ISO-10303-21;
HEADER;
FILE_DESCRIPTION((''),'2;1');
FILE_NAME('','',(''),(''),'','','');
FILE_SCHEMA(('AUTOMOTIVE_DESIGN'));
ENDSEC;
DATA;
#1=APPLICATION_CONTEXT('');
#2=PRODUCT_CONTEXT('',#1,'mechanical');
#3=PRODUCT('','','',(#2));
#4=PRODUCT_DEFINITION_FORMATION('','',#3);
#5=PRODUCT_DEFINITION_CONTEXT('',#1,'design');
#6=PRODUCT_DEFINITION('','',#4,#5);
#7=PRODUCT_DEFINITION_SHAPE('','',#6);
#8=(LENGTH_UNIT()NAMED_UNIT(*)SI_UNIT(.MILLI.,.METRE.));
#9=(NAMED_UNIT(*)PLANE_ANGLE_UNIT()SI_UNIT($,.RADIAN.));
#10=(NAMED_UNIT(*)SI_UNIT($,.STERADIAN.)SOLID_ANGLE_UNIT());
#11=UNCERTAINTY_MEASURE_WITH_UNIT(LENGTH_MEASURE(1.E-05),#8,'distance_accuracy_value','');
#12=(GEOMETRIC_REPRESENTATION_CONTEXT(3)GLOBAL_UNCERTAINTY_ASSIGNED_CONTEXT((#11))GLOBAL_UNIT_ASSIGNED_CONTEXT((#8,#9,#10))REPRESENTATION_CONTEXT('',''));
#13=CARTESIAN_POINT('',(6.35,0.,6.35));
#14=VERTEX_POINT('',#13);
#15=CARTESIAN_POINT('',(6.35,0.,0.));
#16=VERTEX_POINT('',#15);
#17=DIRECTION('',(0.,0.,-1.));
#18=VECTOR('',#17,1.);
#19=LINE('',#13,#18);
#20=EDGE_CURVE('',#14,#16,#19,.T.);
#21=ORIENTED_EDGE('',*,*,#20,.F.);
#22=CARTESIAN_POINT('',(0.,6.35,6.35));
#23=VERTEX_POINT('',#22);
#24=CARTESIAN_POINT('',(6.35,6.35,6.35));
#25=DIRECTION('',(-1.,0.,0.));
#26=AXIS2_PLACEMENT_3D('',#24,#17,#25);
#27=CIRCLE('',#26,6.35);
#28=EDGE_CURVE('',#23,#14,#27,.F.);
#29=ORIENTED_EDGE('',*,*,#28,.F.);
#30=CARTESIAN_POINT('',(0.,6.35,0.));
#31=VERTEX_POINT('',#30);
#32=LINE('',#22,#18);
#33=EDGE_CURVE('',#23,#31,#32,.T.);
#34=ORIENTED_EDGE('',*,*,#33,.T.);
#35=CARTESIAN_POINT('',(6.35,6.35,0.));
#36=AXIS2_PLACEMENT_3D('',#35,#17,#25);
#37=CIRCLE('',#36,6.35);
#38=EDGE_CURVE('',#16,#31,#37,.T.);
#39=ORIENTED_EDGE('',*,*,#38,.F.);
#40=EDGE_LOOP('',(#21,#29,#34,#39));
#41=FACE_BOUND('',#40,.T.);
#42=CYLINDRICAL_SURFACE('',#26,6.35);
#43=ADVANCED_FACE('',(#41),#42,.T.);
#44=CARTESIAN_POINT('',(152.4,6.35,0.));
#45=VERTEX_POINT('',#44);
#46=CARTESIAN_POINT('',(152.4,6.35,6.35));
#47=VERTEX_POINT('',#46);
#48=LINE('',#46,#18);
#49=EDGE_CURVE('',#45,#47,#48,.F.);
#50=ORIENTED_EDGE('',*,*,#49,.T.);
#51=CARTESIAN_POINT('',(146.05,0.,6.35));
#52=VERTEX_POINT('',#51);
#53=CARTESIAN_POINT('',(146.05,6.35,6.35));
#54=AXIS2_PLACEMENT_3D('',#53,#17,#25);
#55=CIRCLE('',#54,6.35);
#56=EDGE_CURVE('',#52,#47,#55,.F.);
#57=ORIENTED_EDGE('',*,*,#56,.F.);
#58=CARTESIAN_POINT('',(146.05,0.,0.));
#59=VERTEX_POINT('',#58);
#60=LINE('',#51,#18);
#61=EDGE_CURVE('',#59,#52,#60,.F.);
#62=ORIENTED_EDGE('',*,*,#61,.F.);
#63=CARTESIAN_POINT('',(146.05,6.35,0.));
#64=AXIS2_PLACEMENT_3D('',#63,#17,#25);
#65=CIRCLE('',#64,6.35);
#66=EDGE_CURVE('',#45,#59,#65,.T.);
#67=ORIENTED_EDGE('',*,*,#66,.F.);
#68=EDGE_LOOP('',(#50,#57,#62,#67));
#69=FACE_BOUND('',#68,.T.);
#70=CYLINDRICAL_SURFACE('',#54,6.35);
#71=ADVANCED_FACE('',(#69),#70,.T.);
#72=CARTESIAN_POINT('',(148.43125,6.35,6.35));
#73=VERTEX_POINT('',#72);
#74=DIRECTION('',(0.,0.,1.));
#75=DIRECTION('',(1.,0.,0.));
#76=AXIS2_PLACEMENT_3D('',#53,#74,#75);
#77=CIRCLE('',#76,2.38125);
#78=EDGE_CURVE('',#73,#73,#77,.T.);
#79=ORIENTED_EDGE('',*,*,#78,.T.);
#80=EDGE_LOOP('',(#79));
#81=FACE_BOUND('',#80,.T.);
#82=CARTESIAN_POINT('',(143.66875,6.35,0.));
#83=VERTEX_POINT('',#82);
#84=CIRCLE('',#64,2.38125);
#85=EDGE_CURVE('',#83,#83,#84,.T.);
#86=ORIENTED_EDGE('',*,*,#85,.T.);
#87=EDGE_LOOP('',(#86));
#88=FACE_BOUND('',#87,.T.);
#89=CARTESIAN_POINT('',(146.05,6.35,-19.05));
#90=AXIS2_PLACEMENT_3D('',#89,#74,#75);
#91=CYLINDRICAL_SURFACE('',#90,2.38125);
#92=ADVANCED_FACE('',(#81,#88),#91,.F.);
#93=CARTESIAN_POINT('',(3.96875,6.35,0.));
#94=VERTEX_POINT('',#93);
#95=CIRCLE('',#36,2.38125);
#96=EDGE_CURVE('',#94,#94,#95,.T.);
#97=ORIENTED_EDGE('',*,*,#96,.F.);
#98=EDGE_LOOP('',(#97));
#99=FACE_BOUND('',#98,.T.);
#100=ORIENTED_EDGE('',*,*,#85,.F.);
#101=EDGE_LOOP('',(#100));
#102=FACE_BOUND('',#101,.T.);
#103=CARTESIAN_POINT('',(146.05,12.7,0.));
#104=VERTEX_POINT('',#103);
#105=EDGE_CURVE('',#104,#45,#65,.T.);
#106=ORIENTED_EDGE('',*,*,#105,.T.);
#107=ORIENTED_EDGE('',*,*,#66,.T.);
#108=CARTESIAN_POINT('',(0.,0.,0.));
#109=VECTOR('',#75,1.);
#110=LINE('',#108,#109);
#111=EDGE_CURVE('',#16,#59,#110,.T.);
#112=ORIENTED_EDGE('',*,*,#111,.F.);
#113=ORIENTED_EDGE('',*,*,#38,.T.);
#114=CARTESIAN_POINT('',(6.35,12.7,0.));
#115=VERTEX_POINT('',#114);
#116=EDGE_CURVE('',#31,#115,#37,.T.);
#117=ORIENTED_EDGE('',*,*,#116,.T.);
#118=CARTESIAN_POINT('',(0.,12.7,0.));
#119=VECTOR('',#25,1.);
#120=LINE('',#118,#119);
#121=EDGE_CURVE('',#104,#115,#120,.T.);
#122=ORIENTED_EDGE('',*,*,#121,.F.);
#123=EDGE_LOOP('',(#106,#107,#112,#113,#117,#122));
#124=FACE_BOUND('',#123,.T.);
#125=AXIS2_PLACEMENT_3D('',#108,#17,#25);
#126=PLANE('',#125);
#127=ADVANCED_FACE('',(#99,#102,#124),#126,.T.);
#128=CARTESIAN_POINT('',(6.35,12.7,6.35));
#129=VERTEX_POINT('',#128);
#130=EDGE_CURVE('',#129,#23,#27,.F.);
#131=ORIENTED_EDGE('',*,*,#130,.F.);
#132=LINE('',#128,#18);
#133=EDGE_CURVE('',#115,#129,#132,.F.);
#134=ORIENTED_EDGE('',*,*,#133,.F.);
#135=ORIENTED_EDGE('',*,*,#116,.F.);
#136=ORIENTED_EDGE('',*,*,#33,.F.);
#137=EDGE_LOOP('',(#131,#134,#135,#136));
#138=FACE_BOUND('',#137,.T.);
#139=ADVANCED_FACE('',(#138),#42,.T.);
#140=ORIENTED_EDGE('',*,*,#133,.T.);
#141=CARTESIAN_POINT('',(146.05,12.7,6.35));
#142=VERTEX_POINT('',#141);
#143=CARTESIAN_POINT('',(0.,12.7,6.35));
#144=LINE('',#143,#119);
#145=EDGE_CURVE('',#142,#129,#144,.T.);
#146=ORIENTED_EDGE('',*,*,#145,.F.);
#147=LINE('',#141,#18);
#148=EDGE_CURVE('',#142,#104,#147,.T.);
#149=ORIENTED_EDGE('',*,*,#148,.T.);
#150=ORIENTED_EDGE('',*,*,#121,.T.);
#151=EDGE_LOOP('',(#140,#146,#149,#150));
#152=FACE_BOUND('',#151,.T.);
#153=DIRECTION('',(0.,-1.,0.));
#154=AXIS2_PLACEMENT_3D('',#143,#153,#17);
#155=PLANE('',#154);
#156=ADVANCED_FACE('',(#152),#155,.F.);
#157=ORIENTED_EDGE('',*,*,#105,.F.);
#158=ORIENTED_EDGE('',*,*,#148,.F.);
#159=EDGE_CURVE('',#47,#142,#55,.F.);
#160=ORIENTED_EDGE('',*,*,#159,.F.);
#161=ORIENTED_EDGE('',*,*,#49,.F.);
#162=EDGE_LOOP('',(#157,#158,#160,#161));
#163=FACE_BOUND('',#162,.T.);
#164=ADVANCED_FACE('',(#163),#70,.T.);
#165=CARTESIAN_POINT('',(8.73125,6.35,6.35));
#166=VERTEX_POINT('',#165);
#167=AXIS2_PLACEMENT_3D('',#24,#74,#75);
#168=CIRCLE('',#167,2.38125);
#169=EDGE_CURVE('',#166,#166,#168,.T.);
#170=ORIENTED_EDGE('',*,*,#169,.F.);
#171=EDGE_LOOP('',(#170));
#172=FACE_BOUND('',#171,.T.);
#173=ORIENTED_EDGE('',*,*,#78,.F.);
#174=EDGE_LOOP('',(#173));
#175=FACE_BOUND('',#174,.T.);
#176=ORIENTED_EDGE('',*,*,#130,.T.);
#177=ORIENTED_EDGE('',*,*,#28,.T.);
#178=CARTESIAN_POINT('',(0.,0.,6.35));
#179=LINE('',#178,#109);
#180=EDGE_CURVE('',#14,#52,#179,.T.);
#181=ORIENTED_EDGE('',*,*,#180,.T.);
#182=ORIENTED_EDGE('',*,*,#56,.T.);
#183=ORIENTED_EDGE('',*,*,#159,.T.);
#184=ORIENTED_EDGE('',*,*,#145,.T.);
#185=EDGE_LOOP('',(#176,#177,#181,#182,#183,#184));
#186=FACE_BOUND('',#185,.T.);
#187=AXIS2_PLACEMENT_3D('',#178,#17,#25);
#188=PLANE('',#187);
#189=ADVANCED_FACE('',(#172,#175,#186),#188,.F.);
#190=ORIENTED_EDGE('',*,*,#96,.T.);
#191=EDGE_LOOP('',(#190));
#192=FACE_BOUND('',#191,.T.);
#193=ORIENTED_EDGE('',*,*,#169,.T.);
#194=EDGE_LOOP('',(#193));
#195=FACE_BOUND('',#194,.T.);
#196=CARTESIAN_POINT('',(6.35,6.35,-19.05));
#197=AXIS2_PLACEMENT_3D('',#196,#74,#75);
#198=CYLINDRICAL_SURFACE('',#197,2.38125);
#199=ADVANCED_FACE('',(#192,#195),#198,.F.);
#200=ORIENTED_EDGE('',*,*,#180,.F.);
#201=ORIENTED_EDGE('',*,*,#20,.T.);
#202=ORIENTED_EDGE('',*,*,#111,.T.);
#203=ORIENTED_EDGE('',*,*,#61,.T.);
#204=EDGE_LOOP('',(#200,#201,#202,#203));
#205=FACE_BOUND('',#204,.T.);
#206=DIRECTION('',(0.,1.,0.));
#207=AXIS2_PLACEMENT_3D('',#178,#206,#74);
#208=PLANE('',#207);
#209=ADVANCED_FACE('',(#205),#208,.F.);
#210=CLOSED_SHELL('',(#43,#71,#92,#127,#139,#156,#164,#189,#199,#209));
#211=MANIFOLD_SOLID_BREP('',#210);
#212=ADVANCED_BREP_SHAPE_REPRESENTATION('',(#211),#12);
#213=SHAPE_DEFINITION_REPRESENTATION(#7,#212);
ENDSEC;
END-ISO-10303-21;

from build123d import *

# Parameters (mm, degrees)
SKETCH1_W           = 152.4
SKETCH1_H           = 12.7
BOSS_EXTRUDE1_DEPTH = 6.35
FILLET1_R           = 6.35
SKETCH2_R           = 2.38125
CUT_EXTRUDE1_DEPTH  = 25.4


with BuildPart() as part:
    # Sketch1 → Boss-Extrude1 (new body)
    with BuildSketch(Plane.XY):
        with Locations((76.2, 6.35)):
            Rectangle(SKETCH1_W, SKETCH1_H)
    extrude(amount=BOSS_EXTRUDE1_DEPTH)

    # Fillet1
    fillet1_edges = [part.edges().sort_by_distance(p)[0] for p in [
        (0, 0, 3.175),
        (0, 12.7, 3.175),
        (152.4, 0, 3.175),
        (152.4, 12.7, 3.175),
    ]]
    fillet(fillet1_edges, radius=FILLET1_R - 0.0001)  # a hair under: the kernel refuses the full size

    # Sketch2 → Cut-Extrude1 (cut)
    with BuildSketch(Plane.XY.offset(6.35)):
        with Locations((6.35, 6.35)):
            Circle(SKETCH2_R)
        with Locations((146.05, 6.35)):
            Circle(SKETCH2_R)
    extrude(amount=-CUT_EXTRUDE1_DEPTH, mode=Mode.SUBTRACT)


solid = part.part
